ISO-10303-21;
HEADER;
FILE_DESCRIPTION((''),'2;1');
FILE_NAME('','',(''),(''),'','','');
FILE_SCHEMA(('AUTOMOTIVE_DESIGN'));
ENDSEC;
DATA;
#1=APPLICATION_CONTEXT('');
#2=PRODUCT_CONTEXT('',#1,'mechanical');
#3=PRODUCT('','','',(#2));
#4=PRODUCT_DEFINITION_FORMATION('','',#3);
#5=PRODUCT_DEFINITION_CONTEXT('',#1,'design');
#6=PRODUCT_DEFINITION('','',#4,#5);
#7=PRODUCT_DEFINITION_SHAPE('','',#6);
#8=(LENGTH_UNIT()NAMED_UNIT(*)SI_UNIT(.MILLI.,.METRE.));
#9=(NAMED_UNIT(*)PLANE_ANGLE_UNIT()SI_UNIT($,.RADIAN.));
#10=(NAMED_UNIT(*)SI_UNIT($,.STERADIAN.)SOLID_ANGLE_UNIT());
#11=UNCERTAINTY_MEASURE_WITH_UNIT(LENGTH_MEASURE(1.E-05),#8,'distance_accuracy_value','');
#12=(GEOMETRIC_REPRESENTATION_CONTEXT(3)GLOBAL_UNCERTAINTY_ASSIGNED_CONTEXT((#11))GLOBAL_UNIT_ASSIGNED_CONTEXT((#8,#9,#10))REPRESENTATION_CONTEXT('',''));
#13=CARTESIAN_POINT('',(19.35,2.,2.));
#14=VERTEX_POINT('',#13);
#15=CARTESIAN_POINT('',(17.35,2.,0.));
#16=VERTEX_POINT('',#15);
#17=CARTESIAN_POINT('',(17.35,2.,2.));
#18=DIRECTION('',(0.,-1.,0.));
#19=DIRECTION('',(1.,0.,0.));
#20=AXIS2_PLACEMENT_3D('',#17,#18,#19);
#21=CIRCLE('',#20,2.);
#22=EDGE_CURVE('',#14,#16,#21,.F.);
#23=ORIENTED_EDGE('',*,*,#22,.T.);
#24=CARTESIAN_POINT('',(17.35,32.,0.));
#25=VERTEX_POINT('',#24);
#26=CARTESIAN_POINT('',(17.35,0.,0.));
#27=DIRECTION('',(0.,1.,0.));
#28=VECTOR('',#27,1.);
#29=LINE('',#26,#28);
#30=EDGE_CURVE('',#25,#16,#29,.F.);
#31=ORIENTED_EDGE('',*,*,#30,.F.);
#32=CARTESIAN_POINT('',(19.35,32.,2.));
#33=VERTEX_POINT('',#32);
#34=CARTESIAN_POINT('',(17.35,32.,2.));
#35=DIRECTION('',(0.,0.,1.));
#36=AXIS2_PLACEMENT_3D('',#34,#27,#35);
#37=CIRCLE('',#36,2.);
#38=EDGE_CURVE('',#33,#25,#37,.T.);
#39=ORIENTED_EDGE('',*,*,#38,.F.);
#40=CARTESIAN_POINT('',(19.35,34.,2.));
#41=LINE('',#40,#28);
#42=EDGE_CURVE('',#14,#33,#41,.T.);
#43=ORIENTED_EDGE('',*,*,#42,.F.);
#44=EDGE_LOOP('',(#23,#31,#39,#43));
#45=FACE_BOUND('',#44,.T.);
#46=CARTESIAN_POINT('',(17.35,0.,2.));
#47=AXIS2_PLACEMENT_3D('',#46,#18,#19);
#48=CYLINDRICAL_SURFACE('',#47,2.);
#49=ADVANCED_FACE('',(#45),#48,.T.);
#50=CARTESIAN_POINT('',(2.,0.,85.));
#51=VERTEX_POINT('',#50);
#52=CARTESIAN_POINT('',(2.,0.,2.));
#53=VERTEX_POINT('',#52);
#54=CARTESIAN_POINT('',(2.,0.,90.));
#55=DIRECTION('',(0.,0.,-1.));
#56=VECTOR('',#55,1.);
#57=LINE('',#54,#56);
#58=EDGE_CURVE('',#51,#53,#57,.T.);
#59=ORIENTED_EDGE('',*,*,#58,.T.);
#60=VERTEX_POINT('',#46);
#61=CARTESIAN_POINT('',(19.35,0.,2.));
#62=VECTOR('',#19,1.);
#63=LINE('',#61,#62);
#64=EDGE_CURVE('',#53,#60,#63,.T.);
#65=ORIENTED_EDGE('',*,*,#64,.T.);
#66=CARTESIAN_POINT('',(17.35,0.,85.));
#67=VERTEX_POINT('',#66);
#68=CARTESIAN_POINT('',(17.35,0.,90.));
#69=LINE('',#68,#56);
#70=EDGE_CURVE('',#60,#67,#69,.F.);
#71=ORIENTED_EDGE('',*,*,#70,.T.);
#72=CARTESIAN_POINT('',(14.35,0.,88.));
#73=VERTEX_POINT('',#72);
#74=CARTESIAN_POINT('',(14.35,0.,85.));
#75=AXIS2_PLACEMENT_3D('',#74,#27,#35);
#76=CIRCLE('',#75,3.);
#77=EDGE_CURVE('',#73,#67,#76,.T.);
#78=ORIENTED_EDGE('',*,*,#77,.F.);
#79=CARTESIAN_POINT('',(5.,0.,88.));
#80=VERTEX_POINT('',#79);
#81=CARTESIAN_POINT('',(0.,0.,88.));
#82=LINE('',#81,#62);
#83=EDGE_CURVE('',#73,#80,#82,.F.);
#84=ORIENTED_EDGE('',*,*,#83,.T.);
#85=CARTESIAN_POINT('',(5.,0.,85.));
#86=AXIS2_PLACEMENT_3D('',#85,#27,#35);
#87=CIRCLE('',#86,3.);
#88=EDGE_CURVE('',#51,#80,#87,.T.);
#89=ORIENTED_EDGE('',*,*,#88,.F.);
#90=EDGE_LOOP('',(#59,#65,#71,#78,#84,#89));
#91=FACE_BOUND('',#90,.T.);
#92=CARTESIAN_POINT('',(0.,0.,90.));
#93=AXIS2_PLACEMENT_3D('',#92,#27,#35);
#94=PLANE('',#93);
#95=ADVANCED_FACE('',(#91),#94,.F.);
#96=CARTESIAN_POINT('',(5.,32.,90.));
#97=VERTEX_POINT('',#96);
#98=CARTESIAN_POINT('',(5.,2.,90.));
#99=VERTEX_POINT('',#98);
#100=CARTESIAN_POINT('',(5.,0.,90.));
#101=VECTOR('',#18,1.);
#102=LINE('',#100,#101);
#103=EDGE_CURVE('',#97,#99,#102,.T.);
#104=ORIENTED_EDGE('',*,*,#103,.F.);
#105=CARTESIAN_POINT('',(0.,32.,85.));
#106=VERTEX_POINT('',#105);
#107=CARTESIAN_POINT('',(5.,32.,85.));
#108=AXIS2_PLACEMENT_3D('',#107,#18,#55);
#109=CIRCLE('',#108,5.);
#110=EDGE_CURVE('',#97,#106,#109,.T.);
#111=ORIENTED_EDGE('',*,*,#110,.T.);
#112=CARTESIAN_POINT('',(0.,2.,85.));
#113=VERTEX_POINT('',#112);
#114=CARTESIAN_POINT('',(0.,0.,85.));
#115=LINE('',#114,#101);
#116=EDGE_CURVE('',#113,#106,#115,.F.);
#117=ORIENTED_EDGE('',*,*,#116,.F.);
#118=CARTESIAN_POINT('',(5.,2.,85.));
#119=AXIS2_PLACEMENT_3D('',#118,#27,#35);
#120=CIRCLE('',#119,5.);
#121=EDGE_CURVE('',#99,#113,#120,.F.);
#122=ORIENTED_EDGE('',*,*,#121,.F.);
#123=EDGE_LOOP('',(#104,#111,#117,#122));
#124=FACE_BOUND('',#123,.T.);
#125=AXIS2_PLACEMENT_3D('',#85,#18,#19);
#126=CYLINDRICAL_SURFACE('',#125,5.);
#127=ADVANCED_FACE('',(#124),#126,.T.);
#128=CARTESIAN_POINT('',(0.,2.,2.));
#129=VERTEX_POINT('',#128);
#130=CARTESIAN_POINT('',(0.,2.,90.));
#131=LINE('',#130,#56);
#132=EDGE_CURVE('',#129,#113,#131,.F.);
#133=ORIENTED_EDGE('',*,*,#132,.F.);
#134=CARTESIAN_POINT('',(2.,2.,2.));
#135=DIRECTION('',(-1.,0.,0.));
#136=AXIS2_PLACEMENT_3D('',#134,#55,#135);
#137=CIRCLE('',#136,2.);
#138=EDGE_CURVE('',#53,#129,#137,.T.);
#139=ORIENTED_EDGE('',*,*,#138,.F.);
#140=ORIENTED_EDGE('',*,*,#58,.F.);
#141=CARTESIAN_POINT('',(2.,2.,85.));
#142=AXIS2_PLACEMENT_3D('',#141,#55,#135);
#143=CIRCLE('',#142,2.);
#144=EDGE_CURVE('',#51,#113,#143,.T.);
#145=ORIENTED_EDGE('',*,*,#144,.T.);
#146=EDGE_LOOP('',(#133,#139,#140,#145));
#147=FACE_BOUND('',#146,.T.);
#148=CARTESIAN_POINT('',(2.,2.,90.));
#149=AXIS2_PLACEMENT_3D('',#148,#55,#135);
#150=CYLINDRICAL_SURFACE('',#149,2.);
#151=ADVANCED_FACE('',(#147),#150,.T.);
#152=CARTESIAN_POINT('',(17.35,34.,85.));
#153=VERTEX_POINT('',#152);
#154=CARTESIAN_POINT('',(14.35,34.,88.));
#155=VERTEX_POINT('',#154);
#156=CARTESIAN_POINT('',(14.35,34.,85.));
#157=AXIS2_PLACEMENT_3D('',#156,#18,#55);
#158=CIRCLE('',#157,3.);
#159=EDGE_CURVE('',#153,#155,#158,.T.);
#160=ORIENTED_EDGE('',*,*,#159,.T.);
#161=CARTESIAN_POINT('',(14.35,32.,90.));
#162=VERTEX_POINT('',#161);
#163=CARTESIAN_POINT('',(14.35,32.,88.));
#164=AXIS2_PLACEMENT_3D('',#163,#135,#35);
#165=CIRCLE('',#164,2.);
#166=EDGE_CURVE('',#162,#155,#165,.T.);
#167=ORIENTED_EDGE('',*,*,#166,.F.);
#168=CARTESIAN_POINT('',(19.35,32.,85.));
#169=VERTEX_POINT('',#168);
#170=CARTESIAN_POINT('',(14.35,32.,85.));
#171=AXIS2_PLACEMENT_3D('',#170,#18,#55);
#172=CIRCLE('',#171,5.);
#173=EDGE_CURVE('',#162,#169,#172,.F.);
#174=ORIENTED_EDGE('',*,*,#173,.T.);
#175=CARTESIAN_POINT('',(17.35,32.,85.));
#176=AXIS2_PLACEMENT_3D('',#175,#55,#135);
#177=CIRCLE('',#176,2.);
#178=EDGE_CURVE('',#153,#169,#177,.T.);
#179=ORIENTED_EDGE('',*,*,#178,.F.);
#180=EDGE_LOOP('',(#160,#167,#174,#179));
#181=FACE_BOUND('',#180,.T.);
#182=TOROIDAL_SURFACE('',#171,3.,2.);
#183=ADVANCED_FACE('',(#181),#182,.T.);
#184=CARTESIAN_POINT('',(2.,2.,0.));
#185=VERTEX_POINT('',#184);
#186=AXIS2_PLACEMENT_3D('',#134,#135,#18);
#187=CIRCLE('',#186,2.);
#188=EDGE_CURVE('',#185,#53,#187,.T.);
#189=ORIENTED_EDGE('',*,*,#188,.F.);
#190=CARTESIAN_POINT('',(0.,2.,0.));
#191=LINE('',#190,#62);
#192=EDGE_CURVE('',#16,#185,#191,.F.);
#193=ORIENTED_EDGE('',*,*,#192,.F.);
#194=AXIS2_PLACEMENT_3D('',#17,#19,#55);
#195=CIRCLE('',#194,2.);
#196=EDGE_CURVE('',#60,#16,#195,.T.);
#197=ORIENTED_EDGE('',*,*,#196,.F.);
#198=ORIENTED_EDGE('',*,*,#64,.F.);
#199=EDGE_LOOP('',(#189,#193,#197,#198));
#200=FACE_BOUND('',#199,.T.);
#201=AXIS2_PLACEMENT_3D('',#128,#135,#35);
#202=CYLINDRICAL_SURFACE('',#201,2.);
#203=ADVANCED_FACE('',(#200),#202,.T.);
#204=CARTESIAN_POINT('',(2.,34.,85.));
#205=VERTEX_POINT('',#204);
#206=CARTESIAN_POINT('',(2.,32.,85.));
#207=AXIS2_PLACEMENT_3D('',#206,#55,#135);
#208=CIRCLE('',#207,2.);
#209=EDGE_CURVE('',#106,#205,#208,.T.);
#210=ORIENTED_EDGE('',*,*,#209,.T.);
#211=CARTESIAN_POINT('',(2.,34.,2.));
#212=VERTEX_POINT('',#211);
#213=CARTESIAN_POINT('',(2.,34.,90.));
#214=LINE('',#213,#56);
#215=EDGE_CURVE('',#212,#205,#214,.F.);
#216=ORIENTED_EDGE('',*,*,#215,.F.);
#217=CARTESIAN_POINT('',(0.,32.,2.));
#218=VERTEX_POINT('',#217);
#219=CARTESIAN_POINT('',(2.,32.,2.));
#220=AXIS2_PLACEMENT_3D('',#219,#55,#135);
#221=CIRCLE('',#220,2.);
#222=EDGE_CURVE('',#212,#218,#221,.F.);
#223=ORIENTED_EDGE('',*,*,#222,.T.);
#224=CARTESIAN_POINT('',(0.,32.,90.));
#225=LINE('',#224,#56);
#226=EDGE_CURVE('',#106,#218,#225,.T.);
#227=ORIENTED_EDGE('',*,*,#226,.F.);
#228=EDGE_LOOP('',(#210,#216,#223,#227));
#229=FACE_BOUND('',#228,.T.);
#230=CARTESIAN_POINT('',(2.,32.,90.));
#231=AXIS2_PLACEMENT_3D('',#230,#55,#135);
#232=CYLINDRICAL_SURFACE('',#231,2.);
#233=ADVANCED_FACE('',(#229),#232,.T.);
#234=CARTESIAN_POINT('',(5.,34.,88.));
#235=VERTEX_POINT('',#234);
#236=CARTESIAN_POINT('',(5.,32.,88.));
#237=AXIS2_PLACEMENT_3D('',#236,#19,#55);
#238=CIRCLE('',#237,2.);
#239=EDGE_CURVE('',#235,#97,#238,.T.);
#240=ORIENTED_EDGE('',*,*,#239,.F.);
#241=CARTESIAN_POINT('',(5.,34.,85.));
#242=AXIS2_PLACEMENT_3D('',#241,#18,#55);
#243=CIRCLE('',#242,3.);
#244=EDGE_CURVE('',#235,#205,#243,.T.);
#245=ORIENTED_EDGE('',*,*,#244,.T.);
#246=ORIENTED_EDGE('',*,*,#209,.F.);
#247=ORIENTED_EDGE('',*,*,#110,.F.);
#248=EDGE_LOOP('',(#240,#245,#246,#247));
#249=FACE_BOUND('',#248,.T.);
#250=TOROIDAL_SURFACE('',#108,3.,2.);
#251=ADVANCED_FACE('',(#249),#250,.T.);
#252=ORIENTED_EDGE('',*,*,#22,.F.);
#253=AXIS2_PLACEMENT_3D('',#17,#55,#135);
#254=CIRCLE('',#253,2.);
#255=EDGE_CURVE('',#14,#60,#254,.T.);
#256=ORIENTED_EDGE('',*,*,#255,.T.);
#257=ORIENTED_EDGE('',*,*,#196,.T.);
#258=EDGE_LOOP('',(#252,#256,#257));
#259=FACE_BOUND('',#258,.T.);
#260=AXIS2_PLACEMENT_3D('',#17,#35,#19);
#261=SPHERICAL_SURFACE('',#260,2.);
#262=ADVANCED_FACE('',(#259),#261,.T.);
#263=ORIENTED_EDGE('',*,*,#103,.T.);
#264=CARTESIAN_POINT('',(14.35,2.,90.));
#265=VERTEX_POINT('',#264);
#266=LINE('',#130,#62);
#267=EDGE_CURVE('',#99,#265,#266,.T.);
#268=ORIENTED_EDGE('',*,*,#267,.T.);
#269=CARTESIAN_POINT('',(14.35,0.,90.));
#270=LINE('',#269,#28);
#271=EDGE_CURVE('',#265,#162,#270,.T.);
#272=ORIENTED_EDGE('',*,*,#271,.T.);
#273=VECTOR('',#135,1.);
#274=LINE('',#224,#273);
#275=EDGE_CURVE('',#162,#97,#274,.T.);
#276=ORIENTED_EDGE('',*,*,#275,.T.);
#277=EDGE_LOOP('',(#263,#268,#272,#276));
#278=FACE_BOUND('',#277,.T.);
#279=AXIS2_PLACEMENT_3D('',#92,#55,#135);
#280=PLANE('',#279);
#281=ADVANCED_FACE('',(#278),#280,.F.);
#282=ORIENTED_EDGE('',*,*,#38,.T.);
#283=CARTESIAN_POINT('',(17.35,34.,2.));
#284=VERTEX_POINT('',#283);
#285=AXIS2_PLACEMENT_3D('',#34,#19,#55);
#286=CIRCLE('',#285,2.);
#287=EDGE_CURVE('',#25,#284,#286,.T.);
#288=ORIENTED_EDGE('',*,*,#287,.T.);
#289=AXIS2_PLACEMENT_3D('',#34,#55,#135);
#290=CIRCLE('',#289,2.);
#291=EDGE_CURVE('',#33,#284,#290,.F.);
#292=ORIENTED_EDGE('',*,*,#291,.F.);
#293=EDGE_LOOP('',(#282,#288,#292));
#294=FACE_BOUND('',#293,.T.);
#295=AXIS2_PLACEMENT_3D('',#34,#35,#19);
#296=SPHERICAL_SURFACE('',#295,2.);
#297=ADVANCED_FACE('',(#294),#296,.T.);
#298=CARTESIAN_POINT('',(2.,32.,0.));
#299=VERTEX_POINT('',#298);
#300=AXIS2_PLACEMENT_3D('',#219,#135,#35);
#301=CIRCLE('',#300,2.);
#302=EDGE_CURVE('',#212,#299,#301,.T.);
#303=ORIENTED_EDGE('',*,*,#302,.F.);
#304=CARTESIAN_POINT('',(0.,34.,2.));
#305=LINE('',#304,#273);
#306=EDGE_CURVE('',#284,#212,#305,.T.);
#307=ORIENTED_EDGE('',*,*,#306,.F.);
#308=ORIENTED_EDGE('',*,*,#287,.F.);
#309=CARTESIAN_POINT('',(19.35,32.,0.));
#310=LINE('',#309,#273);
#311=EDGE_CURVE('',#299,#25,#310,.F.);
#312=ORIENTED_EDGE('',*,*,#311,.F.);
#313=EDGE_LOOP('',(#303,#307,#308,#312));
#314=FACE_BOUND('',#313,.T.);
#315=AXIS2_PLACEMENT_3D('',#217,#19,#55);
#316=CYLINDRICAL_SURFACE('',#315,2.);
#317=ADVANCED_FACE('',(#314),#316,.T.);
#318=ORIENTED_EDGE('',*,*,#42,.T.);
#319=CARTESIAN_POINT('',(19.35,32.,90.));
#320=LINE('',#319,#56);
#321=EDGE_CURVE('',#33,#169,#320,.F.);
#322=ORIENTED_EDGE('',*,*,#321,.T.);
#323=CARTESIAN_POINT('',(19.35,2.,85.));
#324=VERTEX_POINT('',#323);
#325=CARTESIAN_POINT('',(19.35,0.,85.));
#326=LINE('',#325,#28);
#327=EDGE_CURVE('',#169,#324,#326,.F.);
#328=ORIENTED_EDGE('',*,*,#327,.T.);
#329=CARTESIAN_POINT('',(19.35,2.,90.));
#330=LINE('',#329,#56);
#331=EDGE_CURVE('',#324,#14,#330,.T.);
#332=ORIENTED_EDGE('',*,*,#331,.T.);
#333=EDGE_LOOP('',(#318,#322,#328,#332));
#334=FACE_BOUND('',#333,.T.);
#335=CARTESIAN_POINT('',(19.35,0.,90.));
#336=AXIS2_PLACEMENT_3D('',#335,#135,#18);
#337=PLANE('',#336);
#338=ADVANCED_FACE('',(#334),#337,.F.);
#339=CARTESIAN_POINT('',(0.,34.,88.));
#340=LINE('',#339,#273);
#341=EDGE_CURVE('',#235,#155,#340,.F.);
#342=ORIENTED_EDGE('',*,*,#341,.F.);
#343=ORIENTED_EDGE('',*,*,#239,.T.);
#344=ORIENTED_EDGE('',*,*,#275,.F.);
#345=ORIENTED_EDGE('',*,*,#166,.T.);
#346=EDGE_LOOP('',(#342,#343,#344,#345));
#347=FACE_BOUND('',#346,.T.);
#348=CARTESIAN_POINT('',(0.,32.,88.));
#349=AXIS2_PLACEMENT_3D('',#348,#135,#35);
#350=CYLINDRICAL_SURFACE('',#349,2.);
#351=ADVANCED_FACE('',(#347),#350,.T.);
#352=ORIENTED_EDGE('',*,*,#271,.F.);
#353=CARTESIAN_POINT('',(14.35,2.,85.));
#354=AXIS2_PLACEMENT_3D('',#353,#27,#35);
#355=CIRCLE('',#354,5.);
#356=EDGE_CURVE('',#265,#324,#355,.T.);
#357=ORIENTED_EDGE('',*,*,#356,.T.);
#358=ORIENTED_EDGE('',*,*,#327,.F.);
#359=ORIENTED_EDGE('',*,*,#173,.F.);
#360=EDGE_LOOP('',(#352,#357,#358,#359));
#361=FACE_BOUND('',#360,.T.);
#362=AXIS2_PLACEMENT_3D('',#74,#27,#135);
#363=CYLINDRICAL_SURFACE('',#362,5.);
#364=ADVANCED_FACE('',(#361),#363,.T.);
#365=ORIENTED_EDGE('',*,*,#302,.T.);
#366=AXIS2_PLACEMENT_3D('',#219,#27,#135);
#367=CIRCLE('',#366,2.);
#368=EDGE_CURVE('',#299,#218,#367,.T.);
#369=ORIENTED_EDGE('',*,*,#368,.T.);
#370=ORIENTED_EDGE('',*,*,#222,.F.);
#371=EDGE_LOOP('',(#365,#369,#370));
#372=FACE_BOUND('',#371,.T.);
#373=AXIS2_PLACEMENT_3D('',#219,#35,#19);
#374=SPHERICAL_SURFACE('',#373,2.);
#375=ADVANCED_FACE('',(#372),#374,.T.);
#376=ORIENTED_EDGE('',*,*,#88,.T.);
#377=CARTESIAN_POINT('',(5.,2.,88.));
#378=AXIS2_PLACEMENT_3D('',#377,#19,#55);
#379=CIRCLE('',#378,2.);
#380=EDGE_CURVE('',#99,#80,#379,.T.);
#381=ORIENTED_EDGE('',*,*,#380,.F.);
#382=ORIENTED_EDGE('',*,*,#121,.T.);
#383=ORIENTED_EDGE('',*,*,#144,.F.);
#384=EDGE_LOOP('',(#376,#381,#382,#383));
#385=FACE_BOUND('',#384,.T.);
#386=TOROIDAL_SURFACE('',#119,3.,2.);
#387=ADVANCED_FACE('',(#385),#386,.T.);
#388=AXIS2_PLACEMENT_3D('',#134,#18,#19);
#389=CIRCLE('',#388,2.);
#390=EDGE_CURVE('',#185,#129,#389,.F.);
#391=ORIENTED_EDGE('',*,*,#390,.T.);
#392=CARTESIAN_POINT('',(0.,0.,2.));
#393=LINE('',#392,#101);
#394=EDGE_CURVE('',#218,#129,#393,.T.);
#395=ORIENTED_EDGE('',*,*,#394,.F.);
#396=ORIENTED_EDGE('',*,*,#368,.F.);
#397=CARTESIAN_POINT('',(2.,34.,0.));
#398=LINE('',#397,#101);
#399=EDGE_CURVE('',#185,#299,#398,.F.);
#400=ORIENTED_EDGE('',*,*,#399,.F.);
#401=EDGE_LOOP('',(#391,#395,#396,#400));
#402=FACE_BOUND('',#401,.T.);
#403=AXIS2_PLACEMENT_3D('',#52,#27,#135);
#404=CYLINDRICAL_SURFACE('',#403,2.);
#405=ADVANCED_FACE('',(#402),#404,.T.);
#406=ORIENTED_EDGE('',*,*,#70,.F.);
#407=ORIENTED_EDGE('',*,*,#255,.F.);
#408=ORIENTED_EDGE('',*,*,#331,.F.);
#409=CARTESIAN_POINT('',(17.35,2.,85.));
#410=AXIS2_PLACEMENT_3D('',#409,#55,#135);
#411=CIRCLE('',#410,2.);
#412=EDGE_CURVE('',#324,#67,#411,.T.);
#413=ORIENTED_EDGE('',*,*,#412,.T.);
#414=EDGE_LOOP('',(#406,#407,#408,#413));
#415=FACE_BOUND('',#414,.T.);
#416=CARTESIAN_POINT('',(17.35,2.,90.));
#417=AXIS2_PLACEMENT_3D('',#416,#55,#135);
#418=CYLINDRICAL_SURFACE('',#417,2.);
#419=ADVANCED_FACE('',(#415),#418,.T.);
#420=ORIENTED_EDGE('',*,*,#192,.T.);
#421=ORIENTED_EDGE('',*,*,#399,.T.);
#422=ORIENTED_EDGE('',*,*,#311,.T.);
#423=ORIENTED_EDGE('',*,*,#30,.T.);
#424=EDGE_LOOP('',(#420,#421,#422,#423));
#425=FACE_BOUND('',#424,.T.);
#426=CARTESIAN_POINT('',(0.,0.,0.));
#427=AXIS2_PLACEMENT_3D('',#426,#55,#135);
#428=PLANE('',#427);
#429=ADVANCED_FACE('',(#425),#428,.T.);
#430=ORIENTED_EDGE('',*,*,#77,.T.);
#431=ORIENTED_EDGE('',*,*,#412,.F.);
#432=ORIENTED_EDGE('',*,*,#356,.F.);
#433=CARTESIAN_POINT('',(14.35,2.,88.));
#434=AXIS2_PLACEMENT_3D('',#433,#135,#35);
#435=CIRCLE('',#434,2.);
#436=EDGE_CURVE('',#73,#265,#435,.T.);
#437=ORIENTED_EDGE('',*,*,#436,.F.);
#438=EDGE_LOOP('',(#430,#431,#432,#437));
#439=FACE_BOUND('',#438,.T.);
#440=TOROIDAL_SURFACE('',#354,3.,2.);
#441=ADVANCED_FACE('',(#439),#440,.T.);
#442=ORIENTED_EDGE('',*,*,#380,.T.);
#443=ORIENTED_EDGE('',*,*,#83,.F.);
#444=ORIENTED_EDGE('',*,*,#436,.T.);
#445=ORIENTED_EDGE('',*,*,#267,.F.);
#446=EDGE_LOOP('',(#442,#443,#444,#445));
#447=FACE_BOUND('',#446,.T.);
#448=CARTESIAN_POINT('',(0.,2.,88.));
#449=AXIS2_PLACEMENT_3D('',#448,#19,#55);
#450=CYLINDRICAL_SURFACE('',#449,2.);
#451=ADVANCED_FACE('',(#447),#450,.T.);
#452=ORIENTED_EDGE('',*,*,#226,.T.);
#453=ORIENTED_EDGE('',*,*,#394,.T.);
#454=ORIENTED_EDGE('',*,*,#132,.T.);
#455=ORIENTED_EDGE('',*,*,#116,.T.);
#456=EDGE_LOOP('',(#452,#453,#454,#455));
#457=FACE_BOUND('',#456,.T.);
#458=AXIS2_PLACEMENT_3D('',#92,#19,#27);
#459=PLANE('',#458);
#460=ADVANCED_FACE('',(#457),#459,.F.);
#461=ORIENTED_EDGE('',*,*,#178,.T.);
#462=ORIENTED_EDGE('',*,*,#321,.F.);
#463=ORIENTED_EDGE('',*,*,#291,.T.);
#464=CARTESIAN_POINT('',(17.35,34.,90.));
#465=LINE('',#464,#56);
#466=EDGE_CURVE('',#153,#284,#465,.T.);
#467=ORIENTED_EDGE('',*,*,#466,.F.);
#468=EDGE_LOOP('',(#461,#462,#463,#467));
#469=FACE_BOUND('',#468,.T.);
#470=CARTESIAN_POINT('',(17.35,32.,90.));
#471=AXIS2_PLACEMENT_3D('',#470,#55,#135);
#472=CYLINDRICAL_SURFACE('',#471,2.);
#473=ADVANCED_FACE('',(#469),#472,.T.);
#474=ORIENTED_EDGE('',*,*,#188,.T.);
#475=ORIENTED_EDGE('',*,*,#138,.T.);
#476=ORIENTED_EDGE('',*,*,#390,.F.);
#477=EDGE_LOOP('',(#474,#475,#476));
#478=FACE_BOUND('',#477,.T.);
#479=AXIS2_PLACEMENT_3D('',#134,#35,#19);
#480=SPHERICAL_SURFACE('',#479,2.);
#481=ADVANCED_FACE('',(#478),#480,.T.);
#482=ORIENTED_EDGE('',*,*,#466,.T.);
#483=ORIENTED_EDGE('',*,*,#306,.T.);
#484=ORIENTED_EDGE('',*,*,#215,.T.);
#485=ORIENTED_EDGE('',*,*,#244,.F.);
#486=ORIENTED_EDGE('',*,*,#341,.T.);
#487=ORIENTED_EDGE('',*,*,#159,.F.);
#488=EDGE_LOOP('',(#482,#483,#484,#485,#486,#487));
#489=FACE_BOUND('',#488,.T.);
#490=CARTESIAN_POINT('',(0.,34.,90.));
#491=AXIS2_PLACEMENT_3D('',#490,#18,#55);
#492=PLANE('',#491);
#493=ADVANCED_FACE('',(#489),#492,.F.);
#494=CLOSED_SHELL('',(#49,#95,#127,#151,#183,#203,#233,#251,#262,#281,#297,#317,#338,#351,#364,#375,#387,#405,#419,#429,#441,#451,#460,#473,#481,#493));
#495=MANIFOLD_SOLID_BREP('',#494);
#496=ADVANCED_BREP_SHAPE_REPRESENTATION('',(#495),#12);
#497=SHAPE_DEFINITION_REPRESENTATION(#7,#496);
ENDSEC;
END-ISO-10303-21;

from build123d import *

# Parameters (mm, degrees)
ESQUISSE1_W        = 19.35
ESQUISSE1_H        = 34
BOSS_EXTRU_1_DEPTH = 90
CONG_1_R           = 2
CONG_2_R           = 5


with BuildPart() as part:
    # Esquisse1 → Boss.-Extru.1 (new body)
    with BuildSketch(Plane.XY):
        with Locations((9.675, 17)):
            Rectangle(ESQUISSE1_W, ESQUISSE1_H)
    extrude(amount=BOSS_EXTRU_1_DEPTH)

    # Congé1
    cong_1_edges = [part.edges().sort_by_distance(p)[0] for p in [
        (9.675, 34, 90),
        (9.675, 34, 0),
        (19.35, 17, 0),
        (9.675, 0, 0),
        (0, 17, 0),
        (9.675, 0, 90),
        (0, 34, 45),
        (19.35, 34, 45),
        (19.35, 0, 45),
        (0, 0, 45),
    ]]
    fillet(cong_1_edges, radius=CONG_1_R)

    # Congé2
    # the kernel refuses this fillet: 5 mm, written as the material it takes off along each edge
    with BuildSketch(Plane(origin=(14.35, 0, 85), x_dir=(1, 0, 0), z_dir=(0, 0, -1))) as cong_2_piece_1:
        with BuildLine():
            CenterArc((3, -2), 2, 0, 90)
            Line((5, -2), (5, 0))
            Line((5, 0), (3, 0))
        make_face()
    revolve(axis=Axis((14.35, 0, 85), (0, -1, 0)), revolution_arc=90, mode=Mode.SUBTRACT)
    with BuildSketch(Plane(origin=(5, 0, 85), x_dir=(0, 0, 1), z_dir=(1, 0, 0))) as cong_2_piece_2:
        with BuildLine():
            CenterArc((3, -2), 2, 0, 90)
            Line((5, -2), (5, 0))
            Line((5, 0), (3, 0))
        make_face()
    revolve(axis=Axis((5, 0, 85), (0, -1, 0)), revolution_arc=90, mode=Mode.SUBTRACT)
    with BuildSketch(Plane(origin=(14.35, 34, 85), x_dir=(0, 0, 1), z_dir=(-1, 0, 0))) as cong_2_piece_3:
        with BuildLine():
            CenterArc((3, -2), 2, 0, 90)
            Line((5, -2), (5, 0))
            Line((5, 0), (3, 0))
        make_face()
    revolve(axis=Axis((14.35, 34, 85), (0, 1, 0)), revolution_arc=90, mode=Mode.SUBTRACT)
    with BuildSketch(Plane(origin=(5, 34, 85), x_dir=(-1, 0, 0), z_dir=(0, 0, -1))) as cong_2_piece_4:
        with BuildLine():
            CenterArc((3, -2), 2, 0, 90)
            Line((5, -2), (5, 0))
            Line((5, 0), (3, 0))
        make_face()
    revolve(axis=Axis((5, 34, 85), (0, 1, 0)), revolution_arc=90, mode=Mode.SUBTRACT)
    with BuildSketch(Plane(origin=(0, 34, 90), x_dir=(0, 0, -1), z_dir=(0, -1, 0)), Plane(origin=(19.35, 0, 90), x_dir=(0, 0, -1), z_dir=(0, 1, 0))) as cong_2_piece_5:
        with BuildLine():
            CenterArc((CONG_2_R, CONG_2_R), CONG_2_R, 180, 90)
            Line((0, CONG_2_R), (0, 0))
            Line((0, 0), (CONG_2_R, 0))
        make_face()
    extrude(amount=34, mode=Mode.SUBTRACT)


solid = part.part
